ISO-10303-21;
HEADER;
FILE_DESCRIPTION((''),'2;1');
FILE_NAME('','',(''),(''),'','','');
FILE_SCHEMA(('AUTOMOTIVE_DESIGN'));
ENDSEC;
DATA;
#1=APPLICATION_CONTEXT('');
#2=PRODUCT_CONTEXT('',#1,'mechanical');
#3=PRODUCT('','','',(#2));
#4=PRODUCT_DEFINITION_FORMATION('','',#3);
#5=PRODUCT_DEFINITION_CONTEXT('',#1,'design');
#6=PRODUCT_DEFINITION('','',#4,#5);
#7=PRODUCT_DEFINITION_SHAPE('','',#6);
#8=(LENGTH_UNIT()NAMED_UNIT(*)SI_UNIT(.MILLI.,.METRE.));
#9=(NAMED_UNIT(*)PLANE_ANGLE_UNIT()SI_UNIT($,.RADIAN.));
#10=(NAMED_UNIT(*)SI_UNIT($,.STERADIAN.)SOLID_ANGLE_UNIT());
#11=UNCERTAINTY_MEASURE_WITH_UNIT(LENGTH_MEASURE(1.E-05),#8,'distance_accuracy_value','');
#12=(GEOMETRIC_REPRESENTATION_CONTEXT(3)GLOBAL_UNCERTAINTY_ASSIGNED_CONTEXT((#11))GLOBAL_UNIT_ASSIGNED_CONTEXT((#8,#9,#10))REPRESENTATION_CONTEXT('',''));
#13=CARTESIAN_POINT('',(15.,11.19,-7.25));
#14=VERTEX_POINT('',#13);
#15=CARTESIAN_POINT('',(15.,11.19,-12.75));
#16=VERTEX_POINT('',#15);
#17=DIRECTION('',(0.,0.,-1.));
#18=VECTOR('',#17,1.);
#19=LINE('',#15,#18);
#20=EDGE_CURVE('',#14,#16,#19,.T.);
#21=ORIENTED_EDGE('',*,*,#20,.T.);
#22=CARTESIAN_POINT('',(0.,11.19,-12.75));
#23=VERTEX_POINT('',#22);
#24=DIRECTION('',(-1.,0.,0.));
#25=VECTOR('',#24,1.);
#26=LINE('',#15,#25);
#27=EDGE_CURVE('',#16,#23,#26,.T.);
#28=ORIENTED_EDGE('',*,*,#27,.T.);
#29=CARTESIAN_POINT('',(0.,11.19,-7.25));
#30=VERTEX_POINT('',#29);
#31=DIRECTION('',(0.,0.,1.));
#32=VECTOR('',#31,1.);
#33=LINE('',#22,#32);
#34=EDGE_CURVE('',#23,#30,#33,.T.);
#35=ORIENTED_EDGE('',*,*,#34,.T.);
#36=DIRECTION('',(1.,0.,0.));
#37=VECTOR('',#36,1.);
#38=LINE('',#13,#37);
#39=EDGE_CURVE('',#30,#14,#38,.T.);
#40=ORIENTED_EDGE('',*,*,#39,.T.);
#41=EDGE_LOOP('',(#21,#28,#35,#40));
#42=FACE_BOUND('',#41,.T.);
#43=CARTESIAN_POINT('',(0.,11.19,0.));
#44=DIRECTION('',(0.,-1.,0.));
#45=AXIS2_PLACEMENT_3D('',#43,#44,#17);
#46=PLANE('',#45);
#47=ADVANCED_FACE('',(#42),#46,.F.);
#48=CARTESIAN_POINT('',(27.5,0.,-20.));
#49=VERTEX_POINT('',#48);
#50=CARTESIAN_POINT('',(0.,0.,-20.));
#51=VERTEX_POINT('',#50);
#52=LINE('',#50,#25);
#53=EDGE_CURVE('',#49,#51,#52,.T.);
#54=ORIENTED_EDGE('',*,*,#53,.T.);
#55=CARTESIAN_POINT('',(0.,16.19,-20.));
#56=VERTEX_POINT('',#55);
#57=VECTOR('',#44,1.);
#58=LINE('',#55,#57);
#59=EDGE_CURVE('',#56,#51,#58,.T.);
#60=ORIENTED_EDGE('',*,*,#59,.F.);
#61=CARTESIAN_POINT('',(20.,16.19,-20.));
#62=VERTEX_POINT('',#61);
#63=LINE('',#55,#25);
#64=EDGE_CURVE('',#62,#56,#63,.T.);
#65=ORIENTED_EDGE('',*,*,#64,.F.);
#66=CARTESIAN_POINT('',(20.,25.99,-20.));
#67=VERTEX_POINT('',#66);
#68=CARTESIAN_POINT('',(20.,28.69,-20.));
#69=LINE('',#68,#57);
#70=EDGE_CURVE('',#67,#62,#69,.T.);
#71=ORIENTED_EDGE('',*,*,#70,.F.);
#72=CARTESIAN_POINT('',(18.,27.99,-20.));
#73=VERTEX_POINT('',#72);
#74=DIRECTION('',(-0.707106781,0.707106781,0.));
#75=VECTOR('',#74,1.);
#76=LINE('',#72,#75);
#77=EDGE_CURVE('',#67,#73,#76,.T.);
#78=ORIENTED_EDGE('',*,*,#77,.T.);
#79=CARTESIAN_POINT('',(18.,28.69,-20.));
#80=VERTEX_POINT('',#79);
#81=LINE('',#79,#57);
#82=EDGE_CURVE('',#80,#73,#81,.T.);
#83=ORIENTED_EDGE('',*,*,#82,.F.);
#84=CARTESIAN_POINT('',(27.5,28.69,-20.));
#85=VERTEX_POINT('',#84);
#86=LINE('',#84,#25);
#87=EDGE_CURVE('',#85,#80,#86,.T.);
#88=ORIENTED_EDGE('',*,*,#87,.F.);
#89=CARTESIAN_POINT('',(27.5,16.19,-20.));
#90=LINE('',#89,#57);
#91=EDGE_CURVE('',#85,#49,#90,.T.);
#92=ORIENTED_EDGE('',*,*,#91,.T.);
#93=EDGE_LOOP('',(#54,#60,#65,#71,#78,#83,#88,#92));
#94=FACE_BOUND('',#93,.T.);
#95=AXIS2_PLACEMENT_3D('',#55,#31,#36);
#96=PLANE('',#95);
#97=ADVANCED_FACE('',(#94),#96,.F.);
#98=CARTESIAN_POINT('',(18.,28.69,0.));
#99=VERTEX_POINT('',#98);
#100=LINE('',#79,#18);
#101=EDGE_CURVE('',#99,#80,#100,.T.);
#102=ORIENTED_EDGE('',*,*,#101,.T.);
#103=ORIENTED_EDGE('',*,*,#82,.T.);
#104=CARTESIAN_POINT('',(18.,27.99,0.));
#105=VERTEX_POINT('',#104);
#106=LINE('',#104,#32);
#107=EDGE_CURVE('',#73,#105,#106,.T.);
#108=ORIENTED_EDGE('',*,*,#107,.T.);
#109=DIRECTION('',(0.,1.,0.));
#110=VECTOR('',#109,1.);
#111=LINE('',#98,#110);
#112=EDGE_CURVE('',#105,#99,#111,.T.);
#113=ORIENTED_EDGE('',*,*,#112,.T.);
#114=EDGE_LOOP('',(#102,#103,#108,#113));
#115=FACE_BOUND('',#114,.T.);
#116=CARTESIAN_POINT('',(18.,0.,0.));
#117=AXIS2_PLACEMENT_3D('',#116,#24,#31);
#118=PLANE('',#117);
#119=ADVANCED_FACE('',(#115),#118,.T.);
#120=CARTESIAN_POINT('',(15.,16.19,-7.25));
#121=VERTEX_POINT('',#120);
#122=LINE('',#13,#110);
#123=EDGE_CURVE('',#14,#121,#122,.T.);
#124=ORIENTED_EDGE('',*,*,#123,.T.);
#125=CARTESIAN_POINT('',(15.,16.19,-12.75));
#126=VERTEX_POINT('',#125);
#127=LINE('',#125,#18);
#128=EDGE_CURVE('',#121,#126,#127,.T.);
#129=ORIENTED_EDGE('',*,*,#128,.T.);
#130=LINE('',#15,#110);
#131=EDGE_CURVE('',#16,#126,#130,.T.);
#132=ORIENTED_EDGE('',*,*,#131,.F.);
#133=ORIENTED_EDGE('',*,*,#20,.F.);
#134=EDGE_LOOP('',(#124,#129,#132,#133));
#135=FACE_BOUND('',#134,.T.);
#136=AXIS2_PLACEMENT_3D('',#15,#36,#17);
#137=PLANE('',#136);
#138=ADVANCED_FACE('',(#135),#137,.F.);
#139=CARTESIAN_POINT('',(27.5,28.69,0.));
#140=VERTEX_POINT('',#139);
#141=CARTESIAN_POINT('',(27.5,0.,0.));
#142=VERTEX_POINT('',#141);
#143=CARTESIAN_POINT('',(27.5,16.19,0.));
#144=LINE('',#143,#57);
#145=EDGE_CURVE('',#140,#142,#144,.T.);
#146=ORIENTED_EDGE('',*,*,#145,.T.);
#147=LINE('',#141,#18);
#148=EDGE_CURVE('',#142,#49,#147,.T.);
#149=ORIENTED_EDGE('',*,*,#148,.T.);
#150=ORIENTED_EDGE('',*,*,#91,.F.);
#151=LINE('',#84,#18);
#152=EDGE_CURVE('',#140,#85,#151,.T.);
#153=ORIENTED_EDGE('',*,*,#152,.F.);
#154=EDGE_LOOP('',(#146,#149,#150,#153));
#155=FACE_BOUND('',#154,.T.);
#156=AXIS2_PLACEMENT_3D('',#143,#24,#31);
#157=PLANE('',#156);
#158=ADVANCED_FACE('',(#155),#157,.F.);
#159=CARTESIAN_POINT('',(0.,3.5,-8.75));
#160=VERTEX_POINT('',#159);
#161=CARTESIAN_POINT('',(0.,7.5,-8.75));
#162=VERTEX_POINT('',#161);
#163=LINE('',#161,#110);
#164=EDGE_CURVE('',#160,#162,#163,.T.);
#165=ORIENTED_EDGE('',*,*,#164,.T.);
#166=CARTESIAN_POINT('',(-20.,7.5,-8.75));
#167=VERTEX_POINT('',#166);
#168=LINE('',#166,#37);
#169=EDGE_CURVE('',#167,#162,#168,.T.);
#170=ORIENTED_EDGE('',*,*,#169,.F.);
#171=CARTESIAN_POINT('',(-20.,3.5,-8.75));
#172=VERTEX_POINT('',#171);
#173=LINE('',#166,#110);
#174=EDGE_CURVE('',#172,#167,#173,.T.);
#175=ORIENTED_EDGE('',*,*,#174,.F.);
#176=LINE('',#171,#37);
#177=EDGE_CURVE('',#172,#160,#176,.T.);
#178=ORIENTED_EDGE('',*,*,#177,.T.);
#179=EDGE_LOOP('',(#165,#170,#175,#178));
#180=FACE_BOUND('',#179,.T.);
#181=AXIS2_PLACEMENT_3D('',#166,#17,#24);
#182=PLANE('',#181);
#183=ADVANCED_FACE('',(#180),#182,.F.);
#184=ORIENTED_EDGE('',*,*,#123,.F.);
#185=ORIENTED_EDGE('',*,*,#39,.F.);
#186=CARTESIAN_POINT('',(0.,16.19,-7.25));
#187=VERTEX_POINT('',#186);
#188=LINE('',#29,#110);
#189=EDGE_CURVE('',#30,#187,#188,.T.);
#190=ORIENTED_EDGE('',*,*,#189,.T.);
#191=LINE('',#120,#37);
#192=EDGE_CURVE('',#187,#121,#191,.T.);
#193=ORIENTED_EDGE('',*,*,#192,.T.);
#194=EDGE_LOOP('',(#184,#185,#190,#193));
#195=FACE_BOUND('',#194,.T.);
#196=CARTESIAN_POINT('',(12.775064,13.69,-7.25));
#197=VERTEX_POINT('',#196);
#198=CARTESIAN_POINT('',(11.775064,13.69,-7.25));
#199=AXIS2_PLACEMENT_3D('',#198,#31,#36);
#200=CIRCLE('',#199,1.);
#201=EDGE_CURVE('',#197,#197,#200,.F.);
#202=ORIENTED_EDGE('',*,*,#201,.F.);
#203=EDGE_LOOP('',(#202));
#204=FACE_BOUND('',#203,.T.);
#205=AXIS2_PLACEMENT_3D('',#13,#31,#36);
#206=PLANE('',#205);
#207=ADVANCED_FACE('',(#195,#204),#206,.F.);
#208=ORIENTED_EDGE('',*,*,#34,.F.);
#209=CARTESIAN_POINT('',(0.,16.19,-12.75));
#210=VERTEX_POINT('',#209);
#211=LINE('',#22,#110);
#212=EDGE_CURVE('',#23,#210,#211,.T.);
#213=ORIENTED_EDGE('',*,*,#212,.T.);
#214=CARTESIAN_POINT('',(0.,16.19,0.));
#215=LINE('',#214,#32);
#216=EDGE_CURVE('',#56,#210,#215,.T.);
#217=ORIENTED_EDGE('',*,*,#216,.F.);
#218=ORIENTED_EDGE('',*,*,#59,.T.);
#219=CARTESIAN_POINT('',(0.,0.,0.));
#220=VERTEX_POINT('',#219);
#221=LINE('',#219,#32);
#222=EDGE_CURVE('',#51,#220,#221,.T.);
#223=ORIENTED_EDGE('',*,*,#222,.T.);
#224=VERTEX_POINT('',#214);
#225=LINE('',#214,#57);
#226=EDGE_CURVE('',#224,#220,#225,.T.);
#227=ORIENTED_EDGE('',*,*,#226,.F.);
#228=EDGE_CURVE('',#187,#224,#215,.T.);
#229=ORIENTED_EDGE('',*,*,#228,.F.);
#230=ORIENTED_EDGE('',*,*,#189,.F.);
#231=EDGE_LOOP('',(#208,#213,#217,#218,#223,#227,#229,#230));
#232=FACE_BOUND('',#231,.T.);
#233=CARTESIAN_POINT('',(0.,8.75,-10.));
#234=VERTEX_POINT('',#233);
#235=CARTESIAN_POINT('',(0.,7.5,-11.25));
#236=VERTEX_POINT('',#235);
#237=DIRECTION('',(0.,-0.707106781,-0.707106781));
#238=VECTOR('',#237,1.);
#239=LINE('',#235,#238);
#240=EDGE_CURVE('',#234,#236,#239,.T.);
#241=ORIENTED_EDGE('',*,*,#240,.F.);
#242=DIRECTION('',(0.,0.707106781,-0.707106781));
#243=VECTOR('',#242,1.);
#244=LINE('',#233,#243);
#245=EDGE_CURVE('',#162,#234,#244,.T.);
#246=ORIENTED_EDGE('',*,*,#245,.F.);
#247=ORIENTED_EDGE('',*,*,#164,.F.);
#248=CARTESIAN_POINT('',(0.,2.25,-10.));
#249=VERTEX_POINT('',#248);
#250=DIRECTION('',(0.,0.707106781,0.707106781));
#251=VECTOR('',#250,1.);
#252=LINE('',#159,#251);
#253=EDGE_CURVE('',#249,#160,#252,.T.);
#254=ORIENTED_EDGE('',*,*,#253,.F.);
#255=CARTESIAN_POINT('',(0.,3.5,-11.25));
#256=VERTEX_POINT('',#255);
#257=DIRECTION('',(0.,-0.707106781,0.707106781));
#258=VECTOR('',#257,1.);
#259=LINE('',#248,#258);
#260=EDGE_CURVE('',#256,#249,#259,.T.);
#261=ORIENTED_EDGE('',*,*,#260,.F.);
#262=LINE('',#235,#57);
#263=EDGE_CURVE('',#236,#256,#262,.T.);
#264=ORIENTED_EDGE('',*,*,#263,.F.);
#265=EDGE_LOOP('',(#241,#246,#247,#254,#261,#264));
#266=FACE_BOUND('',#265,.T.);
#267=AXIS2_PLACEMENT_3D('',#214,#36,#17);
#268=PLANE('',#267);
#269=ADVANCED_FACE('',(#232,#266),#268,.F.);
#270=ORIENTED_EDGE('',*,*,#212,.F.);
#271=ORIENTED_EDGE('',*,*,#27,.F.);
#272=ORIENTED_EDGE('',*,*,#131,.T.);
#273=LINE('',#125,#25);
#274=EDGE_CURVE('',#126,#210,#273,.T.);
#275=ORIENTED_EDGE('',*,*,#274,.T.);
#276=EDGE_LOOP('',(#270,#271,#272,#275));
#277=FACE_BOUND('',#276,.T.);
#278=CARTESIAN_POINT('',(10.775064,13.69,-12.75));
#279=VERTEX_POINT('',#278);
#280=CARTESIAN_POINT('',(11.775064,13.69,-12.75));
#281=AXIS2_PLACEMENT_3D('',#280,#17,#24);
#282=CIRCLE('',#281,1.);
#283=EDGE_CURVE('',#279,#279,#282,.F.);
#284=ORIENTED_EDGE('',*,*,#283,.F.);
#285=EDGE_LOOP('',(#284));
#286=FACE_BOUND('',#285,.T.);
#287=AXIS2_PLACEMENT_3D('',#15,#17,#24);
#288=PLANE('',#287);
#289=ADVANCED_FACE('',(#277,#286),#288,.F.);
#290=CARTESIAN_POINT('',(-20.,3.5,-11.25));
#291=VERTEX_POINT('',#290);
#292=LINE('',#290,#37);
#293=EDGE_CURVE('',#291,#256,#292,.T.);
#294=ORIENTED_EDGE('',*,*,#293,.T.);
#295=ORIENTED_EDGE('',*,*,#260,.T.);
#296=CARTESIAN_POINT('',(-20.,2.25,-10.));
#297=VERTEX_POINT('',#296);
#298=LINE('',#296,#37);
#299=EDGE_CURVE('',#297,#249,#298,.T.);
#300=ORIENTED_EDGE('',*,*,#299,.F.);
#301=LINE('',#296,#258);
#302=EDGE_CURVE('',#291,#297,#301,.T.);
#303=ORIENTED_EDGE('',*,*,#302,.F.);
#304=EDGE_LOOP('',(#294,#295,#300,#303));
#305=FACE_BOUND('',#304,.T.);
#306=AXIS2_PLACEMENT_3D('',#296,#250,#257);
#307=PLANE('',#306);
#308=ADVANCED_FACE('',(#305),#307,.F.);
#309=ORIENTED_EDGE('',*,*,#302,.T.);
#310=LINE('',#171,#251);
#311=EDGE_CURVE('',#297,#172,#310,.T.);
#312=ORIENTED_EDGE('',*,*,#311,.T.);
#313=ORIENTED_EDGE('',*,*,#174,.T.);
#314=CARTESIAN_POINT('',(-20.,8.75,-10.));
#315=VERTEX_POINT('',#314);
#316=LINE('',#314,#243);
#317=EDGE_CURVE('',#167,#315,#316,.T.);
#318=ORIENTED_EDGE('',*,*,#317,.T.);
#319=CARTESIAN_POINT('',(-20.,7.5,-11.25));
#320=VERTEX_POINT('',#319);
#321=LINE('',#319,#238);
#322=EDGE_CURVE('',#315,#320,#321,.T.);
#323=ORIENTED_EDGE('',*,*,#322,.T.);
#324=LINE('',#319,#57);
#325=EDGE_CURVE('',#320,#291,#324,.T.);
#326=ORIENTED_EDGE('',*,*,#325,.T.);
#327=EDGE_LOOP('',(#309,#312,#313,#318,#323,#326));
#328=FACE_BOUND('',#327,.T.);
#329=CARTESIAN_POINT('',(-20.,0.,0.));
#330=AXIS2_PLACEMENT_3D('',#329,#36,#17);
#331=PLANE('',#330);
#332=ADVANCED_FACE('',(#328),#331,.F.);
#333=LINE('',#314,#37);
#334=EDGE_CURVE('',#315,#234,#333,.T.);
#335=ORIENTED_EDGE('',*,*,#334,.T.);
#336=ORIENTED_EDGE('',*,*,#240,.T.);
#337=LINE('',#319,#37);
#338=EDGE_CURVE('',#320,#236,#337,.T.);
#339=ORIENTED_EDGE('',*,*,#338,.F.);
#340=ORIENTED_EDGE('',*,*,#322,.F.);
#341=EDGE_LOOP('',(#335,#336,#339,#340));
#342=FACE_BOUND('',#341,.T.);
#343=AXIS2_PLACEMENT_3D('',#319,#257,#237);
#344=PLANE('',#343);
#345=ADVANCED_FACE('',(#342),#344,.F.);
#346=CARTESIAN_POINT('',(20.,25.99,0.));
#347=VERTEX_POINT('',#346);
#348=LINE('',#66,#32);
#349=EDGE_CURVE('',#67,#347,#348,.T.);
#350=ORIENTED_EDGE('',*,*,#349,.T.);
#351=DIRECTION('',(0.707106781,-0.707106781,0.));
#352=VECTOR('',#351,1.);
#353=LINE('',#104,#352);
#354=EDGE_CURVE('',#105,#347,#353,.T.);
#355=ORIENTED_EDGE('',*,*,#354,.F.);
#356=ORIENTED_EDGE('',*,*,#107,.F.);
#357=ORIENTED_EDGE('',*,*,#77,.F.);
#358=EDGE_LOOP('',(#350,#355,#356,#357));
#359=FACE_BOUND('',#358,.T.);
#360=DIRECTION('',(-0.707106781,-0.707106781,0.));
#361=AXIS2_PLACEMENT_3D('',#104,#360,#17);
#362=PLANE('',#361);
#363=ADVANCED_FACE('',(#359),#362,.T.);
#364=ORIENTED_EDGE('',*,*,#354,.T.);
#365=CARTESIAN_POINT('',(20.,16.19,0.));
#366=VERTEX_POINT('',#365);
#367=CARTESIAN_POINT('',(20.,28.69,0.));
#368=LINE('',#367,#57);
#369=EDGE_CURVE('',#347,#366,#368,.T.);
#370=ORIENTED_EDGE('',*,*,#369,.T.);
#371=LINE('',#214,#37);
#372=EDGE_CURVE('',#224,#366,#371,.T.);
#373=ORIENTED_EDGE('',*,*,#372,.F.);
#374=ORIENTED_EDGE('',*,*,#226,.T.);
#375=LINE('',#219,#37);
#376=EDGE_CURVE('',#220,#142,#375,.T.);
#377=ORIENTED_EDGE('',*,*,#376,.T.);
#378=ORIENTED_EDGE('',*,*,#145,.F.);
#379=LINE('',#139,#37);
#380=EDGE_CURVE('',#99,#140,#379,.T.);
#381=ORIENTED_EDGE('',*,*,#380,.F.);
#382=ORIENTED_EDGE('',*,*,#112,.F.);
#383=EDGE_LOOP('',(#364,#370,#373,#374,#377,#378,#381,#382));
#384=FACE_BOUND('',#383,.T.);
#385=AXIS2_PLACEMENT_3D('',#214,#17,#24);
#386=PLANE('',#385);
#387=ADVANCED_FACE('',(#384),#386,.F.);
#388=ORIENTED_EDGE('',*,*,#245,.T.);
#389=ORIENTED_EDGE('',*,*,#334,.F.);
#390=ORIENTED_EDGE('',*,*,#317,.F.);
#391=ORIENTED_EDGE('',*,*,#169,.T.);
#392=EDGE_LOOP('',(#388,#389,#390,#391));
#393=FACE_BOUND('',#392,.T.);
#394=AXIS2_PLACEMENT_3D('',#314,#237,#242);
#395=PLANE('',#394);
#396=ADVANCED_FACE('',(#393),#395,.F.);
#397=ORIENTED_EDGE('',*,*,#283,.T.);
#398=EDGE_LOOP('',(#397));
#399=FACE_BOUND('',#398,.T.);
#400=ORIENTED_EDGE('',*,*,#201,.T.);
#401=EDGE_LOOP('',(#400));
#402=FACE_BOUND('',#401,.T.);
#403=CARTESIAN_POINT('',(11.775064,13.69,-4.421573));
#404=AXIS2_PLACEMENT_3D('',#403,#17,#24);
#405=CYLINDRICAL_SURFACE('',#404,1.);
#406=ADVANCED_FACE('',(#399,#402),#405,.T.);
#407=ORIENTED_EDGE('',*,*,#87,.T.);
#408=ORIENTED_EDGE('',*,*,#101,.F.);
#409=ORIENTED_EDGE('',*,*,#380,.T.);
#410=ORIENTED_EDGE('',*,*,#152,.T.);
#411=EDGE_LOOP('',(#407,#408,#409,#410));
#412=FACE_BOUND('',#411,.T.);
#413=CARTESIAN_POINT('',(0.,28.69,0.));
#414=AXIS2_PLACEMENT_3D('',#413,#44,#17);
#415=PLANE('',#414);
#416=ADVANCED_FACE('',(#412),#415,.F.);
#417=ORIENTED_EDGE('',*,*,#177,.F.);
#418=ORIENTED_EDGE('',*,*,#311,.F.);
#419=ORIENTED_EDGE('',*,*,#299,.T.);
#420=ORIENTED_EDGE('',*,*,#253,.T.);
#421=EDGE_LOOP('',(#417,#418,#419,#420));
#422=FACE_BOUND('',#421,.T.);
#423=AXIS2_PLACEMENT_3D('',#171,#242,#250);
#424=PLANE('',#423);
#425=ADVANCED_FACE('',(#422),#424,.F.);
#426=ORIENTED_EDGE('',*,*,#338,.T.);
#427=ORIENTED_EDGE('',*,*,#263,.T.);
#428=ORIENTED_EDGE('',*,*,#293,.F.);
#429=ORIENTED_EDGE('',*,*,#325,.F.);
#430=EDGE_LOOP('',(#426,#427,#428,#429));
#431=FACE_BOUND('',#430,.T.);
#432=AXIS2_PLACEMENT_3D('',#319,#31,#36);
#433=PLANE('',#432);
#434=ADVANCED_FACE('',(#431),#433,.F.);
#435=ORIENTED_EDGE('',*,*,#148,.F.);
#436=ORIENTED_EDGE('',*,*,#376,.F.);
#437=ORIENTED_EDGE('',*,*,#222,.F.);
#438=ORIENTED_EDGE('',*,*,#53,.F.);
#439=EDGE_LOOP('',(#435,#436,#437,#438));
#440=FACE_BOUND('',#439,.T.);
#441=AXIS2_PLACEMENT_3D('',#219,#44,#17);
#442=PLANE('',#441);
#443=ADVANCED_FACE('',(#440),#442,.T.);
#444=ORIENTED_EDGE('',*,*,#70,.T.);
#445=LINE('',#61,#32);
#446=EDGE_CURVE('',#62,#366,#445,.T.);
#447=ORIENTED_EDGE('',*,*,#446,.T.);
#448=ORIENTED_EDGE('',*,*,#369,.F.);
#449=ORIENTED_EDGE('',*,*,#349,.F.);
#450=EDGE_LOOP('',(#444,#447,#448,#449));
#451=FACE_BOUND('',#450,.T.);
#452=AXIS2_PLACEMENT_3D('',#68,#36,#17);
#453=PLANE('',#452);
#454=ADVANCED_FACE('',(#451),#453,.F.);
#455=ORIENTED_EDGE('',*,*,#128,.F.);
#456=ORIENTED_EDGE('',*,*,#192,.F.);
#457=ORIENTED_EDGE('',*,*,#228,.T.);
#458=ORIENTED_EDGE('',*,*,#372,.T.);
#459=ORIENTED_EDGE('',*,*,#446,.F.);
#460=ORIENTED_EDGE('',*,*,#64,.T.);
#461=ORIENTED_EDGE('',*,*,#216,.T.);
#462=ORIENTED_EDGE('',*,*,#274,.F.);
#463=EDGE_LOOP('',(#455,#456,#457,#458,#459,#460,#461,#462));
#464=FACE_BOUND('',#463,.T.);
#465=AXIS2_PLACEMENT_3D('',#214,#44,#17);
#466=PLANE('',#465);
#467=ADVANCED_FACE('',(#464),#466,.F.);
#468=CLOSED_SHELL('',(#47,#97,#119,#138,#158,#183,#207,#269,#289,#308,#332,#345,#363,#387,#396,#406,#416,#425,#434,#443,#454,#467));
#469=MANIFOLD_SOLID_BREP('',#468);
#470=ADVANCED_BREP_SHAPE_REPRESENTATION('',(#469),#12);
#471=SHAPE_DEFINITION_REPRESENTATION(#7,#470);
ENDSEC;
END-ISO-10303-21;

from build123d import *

# Parameters (mm, degrees)
ESQUISSE1_W             = 27.5
ESQUISSE1_H             = 20
BOSS_EXTRU_1_DEPTH      = 16.19
ESQUISSE2_W             = 7.5
ESQUISSE2_H             = 20
BOSS_EXTRU_2_DEPTH      = 12.5
BOSS_EXTRU_4_DEPTH      = 20
ESQUISSE5_W             = 15
ESQUISSE5_H             = 5.5
ENL_V_MAT_EXTRU_1_DEPTH = 5
ESQUISSE11_R            = 1
BOSS_EXTRU_5_DEPTH      = 5.5
ESQUISSE12_W            = 20
ESQUISSE12_H            = 2.7
BOSS_EXTRU_6_DEPTH      = 2
CHANFREIN1_SIZE         = 2


with BuildPart() as part:
    # Esquisse1 → Boss.-Extru.1 (new body)
    with BuildSketch(Plane(origin=(0, 0, 0), x_dir=(1, 0, 0), z_dir=(0, 1, 0))):
        with Locations((13.75, 10)):
            Rectangle(ESQUISSE1_W, ESQUISSE1_H)
    extrude(amount=BOSS_EXTRU_1_DEPTH)

    # Esquisse2 → Boss.-Extru.2 (add)
    with BuildSketch(Plane(origin=(0, 16.19, 0), x_dir=(1, 0, 0), z_dir=(0, 1, 0))):
        with Locations((23.75, 10)):
            Rectangle(ESQUISSE2_W, ESQUISSE2_H)
    extrude(amount=BOSS_EXTRU_2_DEPTH)

    # Esquisse4 → Boss.-Extru.4 (add)
    with BuildSketch(Plane.ZY):
        Polygon((-8.75, 7.5), (-8.75, 3.5), (-10, 2.25), (-11.25, 3.5), (-11.25, 7.5), (-10, 8.75), align=None)
    extrude(amount=BOSS_EXTRU_4_DEPTH)

    # Esquisse5 → Enlèv. mat.-Extru.1 (cut)
    with BuildSketch(Plane(origin=(0, 16.19, 0), x_dir=(1, 0, 0), z_dir=(0, 1, 0))):
        with Locations((7.5, 10)):
            Rectangle(ESQUISSE5_W, ESQUISSE5_H)
    extrude(amount=-ENL_V_MAT_EXTRU_1_DEPTH, mode=Mode.SUBTRACT)

    # Esquisse11 → Boss.-Extru.5 (add)
    with BuildSketch(Plane.XY.offset(-12.75)):
        with Locations(Location((11.77506405, 13.69, 0), (0, 0, 180))):
            Circle(ESQUISSE11_R)
    extrude(amount=BOSS_EXTRU_5_DEPTH)

    # Esquisse12 → Boss.-Extru.6 (add)
    with BuildSketch(Plane.ZY.offset(-20)):
        with Locations((-10, 27.34)):
            Rectangle(ESQUISSE12_W, ESQUISSE12_H)
    extrude(amount=BOSS_EXTRU_6_DEPTH)

    # Chanfrein1
    chanfrein1_edges = [part.edges().sort_by_distance(p)[0] for p in [
        (18, 25.99, -10),
    ]]
    chamfer(chanfrein1_edges, length=CHANFREIN1_SIZE - 0.0001)  # a hair under: the kernel refuses the full size


solid = part.part
